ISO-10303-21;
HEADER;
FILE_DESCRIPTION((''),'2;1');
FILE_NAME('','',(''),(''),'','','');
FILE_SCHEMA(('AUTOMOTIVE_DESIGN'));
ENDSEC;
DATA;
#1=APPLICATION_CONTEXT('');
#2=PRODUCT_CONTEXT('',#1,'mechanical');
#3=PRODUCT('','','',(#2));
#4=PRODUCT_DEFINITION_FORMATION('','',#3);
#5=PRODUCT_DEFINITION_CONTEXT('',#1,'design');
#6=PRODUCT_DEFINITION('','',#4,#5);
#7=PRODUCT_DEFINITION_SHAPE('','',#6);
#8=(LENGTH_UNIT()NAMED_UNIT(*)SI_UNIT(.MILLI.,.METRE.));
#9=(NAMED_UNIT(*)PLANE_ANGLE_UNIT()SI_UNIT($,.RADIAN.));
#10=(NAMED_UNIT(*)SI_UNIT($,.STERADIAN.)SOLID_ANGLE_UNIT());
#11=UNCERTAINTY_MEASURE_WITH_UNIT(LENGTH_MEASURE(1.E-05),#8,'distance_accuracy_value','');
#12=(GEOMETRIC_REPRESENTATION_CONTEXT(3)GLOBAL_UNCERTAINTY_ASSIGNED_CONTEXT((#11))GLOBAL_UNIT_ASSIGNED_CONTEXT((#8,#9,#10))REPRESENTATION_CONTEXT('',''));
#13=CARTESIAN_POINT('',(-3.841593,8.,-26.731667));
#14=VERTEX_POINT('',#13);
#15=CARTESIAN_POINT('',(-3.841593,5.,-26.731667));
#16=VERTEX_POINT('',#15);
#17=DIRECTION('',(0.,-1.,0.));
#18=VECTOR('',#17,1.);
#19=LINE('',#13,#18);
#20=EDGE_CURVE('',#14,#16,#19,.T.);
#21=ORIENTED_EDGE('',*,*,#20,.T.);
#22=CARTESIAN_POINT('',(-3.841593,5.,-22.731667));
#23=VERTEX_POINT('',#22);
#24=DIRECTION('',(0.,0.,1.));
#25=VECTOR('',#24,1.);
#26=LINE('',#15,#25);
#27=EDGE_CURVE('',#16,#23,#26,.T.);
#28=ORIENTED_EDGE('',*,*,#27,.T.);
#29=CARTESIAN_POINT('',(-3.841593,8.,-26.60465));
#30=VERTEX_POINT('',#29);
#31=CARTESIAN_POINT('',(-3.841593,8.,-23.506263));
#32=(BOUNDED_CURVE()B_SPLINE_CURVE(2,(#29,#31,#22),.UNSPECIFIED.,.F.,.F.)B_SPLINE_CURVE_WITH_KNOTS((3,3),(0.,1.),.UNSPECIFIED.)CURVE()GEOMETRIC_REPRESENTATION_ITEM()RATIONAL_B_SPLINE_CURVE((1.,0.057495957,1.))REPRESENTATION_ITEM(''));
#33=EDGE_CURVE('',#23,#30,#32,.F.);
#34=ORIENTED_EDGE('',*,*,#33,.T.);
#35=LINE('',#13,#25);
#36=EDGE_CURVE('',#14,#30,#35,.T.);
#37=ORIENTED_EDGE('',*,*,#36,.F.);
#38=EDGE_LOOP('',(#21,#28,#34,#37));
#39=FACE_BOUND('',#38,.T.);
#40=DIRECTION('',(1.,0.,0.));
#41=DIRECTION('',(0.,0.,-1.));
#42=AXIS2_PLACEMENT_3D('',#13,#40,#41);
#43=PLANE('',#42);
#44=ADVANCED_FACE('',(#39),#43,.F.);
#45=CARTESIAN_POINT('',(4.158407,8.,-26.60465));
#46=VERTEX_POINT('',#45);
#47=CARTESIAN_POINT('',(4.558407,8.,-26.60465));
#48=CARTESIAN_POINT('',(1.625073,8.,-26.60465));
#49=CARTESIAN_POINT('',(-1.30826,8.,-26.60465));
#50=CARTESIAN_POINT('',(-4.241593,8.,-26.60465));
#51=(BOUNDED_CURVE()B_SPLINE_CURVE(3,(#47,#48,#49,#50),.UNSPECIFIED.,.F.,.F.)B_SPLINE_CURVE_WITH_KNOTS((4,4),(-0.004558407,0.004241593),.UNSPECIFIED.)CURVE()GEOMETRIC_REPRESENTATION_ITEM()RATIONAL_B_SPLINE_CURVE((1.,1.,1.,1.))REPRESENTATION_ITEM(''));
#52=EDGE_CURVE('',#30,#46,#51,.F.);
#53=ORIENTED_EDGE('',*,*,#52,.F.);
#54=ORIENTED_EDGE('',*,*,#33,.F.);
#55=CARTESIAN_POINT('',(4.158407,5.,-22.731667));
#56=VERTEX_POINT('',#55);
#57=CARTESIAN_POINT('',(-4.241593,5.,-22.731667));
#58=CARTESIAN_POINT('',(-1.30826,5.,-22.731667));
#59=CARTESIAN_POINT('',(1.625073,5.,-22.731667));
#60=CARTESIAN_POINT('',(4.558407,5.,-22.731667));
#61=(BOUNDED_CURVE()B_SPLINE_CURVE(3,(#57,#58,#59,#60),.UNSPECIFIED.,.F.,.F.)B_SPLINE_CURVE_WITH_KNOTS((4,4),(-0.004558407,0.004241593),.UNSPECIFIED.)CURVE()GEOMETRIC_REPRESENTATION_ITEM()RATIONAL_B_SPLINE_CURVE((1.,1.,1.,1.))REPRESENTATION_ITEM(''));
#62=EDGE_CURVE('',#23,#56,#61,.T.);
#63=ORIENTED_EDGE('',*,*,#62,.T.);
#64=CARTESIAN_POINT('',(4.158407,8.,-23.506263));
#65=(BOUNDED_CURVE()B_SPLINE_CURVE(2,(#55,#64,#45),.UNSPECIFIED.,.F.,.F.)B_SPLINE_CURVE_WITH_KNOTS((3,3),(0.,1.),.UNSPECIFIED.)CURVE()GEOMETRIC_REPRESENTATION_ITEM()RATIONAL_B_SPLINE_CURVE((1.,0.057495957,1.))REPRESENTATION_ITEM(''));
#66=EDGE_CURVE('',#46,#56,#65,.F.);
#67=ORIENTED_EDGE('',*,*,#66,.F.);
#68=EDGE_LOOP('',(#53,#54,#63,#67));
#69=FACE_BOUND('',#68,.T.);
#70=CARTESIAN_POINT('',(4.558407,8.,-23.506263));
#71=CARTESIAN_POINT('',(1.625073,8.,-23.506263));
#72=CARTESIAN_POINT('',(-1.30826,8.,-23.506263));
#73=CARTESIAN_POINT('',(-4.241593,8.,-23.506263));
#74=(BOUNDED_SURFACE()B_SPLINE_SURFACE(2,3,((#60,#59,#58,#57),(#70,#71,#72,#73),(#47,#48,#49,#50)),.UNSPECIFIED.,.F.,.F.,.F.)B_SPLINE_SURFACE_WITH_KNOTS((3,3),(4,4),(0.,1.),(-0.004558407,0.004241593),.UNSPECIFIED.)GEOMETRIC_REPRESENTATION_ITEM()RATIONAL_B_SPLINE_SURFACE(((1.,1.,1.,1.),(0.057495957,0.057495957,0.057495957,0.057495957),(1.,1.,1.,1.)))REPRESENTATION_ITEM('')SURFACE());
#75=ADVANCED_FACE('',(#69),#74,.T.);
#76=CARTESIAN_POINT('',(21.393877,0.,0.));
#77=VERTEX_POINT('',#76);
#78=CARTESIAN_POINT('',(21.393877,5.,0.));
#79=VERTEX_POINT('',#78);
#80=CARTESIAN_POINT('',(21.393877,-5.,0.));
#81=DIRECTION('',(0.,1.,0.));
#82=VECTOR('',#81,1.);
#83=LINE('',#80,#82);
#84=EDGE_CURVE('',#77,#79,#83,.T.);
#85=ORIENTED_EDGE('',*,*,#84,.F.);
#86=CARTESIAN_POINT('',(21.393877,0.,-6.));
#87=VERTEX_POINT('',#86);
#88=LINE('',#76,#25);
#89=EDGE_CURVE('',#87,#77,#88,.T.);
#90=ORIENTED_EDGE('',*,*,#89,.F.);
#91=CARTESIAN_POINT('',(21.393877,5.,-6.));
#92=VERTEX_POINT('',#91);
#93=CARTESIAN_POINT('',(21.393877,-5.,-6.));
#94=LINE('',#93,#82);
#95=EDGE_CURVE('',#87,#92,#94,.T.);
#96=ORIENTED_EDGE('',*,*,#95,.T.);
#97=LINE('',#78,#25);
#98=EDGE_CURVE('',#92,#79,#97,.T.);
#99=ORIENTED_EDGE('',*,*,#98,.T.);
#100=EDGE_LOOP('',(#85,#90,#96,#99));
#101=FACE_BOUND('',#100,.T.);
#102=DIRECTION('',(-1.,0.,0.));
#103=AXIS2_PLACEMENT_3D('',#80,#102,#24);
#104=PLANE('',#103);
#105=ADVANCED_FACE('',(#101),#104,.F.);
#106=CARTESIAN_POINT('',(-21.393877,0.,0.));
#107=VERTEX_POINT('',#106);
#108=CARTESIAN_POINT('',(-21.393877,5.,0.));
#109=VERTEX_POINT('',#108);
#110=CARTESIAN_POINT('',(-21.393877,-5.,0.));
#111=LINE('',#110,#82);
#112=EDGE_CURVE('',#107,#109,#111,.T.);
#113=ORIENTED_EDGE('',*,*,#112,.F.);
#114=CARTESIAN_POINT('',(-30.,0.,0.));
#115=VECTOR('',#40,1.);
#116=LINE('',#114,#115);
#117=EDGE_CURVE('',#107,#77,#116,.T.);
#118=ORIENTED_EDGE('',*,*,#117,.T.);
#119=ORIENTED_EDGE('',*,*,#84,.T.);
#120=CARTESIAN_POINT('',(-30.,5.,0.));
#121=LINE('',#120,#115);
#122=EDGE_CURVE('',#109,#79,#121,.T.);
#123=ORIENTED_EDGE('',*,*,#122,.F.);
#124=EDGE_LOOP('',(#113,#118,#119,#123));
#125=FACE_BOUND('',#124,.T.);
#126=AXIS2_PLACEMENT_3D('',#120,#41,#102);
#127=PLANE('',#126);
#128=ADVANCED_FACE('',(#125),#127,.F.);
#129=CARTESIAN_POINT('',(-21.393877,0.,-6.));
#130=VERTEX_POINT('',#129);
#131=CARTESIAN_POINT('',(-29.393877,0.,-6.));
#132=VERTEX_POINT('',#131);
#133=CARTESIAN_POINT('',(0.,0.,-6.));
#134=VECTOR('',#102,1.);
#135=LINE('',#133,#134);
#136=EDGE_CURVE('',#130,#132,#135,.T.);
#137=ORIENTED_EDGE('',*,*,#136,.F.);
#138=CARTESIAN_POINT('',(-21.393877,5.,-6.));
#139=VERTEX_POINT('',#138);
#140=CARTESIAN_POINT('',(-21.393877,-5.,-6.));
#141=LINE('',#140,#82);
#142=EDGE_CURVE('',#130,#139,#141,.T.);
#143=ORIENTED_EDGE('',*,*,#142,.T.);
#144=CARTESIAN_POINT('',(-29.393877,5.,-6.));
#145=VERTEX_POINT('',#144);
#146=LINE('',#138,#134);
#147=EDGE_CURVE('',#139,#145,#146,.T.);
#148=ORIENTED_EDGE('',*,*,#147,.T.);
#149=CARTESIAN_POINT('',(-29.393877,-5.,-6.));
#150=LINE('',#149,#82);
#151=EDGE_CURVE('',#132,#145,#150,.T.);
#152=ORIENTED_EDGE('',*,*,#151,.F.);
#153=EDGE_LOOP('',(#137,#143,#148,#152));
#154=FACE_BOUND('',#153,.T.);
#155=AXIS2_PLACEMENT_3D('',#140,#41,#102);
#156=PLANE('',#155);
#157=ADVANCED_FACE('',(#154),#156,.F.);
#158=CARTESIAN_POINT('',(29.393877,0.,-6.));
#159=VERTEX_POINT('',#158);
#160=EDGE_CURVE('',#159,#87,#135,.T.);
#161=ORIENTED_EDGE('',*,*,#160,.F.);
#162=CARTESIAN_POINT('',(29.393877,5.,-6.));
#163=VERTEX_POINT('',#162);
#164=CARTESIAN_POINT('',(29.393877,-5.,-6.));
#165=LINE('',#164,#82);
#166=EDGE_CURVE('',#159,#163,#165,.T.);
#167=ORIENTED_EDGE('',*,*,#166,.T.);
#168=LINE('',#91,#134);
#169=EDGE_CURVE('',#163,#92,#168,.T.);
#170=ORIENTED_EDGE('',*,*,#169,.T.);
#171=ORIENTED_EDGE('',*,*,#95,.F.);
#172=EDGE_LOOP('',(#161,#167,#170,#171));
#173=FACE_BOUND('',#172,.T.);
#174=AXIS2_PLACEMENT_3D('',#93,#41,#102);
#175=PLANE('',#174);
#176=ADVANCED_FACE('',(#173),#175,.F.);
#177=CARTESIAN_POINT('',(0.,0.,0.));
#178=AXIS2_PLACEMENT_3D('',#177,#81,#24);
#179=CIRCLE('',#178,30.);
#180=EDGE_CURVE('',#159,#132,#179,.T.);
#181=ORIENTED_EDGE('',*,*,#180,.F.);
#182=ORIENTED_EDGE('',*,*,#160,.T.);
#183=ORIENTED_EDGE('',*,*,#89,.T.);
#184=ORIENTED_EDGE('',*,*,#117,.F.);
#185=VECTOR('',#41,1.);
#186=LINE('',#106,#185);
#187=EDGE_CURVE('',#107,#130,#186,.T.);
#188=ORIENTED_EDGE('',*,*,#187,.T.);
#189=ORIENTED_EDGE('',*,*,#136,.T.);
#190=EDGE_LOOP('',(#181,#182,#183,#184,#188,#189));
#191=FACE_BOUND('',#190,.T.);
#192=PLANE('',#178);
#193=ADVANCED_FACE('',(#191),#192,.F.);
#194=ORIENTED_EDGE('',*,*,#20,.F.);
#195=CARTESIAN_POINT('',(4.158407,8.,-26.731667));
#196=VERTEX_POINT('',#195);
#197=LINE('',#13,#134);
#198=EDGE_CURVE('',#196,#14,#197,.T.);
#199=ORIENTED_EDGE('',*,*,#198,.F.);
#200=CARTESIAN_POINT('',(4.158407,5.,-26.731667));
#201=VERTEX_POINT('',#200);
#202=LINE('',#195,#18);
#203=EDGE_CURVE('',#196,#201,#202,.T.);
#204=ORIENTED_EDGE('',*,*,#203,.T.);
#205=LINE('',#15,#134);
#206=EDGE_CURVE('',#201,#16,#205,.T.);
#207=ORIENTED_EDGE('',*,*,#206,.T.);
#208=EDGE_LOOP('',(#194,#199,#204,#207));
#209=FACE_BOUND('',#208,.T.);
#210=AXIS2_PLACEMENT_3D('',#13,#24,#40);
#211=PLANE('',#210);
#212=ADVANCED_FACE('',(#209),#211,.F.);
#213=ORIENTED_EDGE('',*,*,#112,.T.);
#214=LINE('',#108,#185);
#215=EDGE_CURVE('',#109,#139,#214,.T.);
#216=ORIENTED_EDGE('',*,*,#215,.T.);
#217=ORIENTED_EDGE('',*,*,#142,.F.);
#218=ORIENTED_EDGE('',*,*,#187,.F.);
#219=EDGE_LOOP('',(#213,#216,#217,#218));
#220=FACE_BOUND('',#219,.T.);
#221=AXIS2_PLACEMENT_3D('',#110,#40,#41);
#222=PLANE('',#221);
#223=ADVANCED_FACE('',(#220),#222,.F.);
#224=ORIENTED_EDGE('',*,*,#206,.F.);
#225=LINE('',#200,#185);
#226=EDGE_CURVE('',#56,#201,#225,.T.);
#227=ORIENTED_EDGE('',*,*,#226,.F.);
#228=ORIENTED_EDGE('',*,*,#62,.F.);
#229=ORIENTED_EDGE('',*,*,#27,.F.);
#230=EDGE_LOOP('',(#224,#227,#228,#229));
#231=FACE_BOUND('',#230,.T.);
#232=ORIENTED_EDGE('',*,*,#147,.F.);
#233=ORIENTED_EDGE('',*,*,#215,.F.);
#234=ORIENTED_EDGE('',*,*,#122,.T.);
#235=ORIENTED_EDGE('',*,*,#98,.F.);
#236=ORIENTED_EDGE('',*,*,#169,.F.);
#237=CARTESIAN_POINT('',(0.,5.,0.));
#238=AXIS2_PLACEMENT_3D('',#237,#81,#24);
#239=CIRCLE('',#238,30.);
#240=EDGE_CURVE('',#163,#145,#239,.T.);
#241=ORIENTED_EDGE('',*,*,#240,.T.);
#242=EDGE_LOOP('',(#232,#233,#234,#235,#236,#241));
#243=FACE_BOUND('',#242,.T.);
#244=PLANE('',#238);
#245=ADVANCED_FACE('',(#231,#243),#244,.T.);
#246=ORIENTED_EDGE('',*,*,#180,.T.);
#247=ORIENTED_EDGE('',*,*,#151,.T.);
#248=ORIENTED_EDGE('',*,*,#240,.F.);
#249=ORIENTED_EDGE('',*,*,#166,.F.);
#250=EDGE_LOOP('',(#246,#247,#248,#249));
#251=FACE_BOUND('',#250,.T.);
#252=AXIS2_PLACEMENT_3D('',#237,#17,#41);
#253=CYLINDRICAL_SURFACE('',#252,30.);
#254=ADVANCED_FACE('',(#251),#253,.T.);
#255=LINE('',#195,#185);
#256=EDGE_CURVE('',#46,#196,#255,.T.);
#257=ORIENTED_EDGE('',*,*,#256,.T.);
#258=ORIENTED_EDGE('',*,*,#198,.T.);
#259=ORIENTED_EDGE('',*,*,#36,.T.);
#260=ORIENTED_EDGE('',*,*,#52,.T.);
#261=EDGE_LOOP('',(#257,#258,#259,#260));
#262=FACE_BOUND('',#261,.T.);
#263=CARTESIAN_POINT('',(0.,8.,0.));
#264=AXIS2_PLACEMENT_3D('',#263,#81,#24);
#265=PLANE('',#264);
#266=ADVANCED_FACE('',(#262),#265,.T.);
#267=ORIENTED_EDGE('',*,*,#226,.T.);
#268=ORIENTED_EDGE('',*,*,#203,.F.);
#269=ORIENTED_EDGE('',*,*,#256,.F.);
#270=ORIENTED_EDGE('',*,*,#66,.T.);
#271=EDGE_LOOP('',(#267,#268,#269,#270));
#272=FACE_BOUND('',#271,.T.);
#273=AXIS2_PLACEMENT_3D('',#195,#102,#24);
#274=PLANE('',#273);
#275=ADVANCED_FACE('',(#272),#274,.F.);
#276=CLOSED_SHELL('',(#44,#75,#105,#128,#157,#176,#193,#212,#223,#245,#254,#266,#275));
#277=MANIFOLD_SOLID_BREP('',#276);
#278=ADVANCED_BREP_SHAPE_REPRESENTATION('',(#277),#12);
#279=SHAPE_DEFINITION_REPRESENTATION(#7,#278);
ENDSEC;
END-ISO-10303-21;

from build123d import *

# Parameters (mm, degrees)
BOSS_EXTRUDE1_DEPTH = 5
SKETCH3_W           = 8
SKETCH3_H           = 4
BOSS_EXTRUDE2_DEPTH = 3
FILLET1_START       = -3.841593316
FILLET1_DEPTH       = 8
CUT_EXTRUDE1_START  = -10
CUT_EXTRUDE1_DEPTH  = 10


with BuildPart() as part:
    # Sketch1 → Boss-Extrude1 (new body)
    with BuildSketch(Plane(origin=(0, 0, 0), x_dir=(1, 0, 0), z_dir=(0, 1, 0))):
        with BuildLine():
            Line((-30, 0), (30, 0))
            ThreePointArc((30, 0), (0, 30), (-30, 0))
        make_face()
    extrude(amount=BOSS_EXTRUDE1_DEPTH)

    # Sketch3 → Boss-Extrude2 (add)
    with BuildSketch(Plane(origin=(0, 5, 0), x_dir=(1, 0, 0), z_dir=(0, 1, 0))):
        with Locations((0.158406684, 24.731666579)):
            Rectangle(SKETCH3_W, SKETCH3_H)
    extrude(amount=BOSS_EXTRUDE2_DEPTH)

    # Fillet1: read off the stored shape, not the designer's step
    # Fillet1 outline → Fillet1 (cut)
    with BuildSketch(Plane.YZ.offset(FILLET1_START)):
        with BuildLine():
            Line((8, -22.731666579), (5, -22.731666579))
            add(Edge.make_bspline(
                [(5, -22.731666579), (8, -23.506263249), (8, -26.604649926)],
                knots=[0, 0, 0, 1, 1, 1], degree=2, weights=[1, 0.057495957, 1]))
            Line((8, -26.604649926), (8, -22.731666579))
        make_face()
    extrude(amount=FILLET1_DEPTH, mode=Mode.SUBTRACT)

    # Sketch5 → Cut-Extrude1 (cut)
    with BuildSketch(Plane(origin=(0, 5, 0), x_dir=(1, 0, 0), z_dir=(0, 1, 0)).offset(CUT_EXTRUDE1_START)):
        with BuildLine():
            Line((-21.393876913, 0), (-21.393876913, 6))
            Line((-21.393876913, 6), (-29.393876913, 6))
            ThreePointArc((-29.393876913, 6), (-29.84808459, 3.01526886), (-30, 0))
            Line((-30, 0), (-21.393876913, 0))
        make_face()
        with BuildLine():
            Line((21.393876913, 6), (29.393876913, 6))
            ThreePointArc((29.393876913, 6), (29.84808459, 3.01526886), (30, 0))
            Line((30, 0), (21.393876913, 0))
            Line((21.393876913, 0), (21.393876913, 6))
        make_face()
    extrude(amount=CUT_EXTRUDE1_DEPTH, mode=Mode.SUBTRACT)


solid = part.part
